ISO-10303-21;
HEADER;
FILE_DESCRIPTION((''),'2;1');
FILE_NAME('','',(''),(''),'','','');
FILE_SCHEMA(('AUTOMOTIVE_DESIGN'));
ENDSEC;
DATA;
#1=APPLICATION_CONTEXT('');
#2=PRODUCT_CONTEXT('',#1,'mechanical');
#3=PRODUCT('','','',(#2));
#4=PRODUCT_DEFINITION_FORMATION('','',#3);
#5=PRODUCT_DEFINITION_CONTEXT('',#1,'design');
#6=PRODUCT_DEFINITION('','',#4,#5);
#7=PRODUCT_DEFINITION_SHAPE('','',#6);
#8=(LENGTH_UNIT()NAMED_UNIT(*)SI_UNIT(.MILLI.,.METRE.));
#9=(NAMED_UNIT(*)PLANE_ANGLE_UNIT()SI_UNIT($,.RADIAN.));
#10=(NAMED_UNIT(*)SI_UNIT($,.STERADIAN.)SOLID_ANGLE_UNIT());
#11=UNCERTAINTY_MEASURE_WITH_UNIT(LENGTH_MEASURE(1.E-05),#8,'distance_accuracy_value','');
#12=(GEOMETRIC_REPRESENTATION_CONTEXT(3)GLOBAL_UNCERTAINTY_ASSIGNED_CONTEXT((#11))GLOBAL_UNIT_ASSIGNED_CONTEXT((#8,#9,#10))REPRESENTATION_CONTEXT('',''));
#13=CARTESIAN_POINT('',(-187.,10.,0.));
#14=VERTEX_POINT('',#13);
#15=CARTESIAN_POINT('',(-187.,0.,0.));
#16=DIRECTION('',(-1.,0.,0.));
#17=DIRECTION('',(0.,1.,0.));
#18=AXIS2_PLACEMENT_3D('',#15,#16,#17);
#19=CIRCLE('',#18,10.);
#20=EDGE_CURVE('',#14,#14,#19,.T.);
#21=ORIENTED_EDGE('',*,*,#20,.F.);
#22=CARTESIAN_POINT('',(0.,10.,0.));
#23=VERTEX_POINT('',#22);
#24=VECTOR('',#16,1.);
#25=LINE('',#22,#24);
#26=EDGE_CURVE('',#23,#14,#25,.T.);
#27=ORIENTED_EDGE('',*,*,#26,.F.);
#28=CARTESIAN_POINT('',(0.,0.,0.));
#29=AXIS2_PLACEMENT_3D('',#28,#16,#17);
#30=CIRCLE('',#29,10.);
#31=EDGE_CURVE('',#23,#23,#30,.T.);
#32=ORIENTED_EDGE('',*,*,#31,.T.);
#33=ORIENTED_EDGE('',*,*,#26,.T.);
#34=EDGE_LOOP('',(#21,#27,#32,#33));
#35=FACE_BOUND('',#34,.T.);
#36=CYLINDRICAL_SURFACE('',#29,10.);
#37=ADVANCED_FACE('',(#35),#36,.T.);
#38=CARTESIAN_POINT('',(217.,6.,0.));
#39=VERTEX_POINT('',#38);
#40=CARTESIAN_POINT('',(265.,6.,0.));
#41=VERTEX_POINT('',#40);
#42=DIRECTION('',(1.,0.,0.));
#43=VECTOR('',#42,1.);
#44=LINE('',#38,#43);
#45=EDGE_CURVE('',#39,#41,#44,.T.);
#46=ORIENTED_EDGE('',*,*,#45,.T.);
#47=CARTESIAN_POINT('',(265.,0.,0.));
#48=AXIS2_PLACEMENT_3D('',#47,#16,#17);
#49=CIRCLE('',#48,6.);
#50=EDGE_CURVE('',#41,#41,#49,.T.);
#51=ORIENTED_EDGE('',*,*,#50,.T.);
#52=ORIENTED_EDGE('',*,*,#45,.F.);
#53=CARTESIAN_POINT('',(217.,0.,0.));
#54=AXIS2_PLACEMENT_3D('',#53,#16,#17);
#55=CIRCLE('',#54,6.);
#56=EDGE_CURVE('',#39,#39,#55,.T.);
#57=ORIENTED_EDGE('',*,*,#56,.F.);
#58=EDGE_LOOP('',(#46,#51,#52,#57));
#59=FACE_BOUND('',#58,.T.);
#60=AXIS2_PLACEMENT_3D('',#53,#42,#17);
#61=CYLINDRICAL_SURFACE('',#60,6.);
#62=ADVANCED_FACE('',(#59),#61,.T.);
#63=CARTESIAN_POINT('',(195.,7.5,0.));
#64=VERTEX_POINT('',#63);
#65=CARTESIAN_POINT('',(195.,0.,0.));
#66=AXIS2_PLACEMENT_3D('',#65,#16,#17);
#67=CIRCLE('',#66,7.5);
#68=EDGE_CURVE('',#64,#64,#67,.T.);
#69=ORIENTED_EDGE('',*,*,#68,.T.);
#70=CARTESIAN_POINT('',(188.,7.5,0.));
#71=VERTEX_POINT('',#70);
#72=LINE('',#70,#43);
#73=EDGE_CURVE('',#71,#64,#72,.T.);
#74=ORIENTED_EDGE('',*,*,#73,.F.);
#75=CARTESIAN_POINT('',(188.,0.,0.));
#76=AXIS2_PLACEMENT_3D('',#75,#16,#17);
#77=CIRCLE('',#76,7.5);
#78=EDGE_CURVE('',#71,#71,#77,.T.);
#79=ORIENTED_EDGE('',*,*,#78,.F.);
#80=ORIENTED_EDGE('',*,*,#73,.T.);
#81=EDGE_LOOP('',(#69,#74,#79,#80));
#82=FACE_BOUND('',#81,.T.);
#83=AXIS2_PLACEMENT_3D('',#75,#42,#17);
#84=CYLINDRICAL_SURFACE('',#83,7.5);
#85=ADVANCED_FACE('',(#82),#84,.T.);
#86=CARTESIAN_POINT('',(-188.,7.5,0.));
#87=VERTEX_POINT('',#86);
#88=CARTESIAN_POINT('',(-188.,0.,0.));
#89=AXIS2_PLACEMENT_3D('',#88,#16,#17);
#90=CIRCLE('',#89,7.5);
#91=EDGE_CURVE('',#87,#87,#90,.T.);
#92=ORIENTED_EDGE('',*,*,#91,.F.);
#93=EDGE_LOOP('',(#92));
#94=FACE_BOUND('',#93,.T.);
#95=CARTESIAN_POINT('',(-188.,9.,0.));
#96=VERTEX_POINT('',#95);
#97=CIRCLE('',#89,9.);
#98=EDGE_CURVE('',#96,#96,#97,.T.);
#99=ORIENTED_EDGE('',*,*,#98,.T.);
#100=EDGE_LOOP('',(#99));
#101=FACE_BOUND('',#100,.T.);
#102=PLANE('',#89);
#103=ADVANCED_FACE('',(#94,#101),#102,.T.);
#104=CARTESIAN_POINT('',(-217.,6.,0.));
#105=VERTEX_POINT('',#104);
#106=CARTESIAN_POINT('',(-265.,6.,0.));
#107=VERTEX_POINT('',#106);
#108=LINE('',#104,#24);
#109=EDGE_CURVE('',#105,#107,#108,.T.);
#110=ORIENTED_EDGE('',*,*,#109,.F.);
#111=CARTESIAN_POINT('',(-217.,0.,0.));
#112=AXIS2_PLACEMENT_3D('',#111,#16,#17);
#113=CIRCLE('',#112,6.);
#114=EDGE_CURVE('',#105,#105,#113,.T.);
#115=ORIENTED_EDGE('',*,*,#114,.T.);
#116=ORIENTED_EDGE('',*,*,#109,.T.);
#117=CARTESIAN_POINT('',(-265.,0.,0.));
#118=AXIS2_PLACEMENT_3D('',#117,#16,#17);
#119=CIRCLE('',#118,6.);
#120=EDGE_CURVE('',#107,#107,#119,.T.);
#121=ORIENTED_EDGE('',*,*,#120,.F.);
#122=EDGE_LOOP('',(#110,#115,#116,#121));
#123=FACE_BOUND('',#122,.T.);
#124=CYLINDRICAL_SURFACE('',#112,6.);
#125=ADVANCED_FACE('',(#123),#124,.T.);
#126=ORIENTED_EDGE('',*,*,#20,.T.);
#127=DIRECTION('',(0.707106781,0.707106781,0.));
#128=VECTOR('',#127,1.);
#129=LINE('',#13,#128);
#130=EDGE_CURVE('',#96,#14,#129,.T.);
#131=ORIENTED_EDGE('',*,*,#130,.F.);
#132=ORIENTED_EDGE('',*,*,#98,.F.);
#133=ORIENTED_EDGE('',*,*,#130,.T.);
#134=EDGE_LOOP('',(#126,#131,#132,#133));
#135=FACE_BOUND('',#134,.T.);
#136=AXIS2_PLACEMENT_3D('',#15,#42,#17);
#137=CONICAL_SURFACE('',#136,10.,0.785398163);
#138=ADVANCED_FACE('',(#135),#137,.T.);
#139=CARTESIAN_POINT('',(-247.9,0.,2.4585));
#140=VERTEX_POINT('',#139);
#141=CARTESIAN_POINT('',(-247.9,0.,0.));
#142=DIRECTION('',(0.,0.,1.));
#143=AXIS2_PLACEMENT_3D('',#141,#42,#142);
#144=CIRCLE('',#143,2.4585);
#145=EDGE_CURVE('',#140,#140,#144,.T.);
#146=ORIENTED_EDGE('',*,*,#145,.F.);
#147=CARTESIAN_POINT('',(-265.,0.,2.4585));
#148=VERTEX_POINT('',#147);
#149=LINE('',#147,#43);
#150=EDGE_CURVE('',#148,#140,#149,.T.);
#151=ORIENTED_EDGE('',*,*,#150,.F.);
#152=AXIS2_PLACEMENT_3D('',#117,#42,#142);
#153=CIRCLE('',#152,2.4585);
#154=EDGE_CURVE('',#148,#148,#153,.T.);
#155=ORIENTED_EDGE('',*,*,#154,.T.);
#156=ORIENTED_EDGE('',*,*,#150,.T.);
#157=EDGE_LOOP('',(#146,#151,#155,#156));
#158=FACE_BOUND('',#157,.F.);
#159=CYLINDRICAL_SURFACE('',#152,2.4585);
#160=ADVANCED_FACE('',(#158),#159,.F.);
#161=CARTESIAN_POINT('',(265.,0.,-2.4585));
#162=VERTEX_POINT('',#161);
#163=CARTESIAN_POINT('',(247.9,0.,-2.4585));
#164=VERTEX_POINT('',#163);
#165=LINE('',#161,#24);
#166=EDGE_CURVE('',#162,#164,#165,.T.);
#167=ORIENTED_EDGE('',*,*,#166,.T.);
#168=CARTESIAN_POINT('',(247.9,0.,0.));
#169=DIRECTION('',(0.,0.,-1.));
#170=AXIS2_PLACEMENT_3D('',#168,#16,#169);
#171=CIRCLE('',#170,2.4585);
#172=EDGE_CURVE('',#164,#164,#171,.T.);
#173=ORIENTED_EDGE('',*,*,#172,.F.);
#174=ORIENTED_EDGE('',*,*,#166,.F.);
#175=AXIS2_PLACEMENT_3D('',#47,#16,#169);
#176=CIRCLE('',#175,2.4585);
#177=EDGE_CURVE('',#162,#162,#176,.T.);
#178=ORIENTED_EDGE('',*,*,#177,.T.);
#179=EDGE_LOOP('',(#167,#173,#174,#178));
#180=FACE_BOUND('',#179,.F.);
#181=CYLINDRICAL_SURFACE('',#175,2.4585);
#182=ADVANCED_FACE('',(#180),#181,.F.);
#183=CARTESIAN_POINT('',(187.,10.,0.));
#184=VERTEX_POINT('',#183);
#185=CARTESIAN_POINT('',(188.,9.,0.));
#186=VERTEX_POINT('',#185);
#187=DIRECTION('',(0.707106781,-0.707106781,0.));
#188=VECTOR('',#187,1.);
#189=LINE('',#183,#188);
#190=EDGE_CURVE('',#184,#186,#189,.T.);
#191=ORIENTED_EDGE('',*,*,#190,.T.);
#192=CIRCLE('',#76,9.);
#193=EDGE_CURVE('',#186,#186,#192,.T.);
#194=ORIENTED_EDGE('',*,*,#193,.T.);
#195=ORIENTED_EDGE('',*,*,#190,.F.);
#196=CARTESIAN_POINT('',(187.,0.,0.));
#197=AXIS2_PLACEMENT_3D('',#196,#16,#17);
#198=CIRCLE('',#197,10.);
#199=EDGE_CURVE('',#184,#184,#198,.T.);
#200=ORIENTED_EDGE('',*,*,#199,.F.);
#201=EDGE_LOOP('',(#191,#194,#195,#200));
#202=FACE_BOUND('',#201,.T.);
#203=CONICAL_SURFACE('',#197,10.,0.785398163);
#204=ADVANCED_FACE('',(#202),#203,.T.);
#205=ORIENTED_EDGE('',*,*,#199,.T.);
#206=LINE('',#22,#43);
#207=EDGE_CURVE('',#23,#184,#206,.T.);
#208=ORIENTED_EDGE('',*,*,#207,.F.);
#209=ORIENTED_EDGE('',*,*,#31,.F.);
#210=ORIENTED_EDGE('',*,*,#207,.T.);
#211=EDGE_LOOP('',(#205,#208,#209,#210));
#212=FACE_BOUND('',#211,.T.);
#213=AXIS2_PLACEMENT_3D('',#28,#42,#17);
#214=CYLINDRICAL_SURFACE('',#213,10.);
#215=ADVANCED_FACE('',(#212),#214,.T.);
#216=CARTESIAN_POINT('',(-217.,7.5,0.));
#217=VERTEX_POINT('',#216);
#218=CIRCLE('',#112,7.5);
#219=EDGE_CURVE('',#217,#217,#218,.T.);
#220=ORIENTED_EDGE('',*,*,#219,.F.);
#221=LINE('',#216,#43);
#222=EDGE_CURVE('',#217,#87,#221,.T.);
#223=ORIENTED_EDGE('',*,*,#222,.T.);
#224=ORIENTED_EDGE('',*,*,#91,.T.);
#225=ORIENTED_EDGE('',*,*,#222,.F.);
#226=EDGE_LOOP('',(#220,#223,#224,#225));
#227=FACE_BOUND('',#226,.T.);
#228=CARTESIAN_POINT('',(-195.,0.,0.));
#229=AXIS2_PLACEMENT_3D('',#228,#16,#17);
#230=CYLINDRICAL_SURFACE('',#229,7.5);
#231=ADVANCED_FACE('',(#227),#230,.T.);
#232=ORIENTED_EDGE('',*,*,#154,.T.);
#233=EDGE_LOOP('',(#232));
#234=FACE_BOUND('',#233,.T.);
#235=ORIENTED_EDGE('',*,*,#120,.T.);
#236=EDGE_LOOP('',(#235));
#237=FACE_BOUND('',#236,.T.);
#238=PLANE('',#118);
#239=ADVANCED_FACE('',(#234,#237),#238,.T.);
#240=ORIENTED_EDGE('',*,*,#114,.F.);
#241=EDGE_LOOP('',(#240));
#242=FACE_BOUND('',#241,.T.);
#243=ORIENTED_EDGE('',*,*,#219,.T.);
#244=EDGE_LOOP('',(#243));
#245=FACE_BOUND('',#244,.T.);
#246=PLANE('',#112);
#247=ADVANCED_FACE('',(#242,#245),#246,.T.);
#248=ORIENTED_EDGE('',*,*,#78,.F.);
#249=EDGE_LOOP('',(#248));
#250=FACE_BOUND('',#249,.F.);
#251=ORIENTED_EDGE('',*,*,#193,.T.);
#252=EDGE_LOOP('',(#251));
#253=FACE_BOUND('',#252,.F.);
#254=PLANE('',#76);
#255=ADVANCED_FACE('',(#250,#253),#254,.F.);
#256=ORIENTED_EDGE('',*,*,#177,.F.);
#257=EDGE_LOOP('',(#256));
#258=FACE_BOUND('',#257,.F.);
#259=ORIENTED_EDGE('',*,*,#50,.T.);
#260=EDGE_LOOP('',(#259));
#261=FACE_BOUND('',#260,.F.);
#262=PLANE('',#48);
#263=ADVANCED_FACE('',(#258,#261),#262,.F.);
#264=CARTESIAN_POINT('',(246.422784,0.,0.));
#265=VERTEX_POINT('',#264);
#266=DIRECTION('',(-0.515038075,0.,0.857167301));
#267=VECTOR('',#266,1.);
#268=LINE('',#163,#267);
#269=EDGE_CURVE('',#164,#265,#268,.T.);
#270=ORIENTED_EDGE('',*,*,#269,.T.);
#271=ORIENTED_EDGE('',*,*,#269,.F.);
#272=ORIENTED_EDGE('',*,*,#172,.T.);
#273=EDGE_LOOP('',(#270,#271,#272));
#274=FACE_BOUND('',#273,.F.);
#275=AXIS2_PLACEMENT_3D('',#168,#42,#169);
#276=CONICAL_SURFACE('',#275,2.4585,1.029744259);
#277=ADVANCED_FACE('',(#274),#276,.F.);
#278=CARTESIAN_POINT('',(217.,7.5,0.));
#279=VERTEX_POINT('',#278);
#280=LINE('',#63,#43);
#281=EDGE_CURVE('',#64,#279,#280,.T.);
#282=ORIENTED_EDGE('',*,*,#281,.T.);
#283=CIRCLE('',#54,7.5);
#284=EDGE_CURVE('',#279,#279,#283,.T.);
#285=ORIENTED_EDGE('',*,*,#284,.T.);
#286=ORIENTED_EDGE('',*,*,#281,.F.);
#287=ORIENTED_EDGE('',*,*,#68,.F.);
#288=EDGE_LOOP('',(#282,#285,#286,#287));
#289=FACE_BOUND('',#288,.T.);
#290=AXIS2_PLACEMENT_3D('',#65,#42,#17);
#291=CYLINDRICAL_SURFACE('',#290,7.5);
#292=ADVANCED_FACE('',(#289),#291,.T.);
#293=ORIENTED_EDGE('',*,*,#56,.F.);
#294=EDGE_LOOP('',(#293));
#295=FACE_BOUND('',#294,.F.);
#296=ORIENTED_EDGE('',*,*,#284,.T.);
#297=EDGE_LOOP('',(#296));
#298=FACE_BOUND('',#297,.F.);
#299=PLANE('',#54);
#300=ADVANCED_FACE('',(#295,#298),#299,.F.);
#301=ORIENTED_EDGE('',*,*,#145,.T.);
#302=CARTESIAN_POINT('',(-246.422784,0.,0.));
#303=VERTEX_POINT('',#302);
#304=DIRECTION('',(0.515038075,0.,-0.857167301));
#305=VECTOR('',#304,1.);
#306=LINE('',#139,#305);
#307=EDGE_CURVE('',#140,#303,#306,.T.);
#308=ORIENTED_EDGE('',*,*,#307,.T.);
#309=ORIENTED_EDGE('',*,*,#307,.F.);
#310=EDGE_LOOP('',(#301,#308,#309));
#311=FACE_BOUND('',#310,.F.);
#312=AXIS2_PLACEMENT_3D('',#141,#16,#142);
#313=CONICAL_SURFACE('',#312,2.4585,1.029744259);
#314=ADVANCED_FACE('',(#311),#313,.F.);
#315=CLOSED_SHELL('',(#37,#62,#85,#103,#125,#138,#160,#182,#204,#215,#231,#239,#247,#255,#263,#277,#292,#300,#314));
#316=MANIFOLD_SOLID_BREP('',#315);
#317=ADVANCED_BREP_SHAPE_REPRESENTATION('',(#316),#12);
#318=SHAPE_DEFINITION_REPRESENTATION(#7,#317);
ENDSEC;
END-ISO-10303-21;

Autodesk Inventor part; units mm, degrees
ref_plane "YZ Plane" through (0, 0, 0) normal (1, 0, 0) x (0, 1, 0)
ref_plane "XZ Plane" through (0, 0, 0) normal (0, 1, 0) x (-1, 0, 0)
ref_plane "XY Plane" through (0, 0, 0) normal (0, 0, 1) x (1, 0, 0)
sketch "Sketch1" plane through (0, 0, 0) normal (0, 0, 1) x (1, 0, 0)
  line L0 (0, 0) -> (0, 10)
  line L1 (0, 10) -> (188, 10)
  line L2 (188, 10) -> (188, 7.5)
  line L3 (188, 7.5) -> (195, 7.5)
  line L4 (195, 7.5) -> (195, 7.5)
  line L5 (195, 7.5) -> (217, 7.5)
  line L6 (265, 0) -> (0, 0)
  line L7 (217, 7.5) -> (217, 6)
  line L8 (217, 6) -> (265, 6)
  line L9 (265, 6) -> (265, 0)
  line L10 (0, 10) -> (-188, 10)
  line L11 (-188, 10) -> (-188, 7.5)
  line L12 (-188, 7.5) -> (-195, 7.5)
  line L13 (-195, 7.5) -> (-195, 7.5)
  line L14 (-195, 7.5) -> (-217, 7.5)
  line L15 (-265, 0) -> (0, 0)
  line L16 (-217, 7.5) -> (-217, 6)
  line L17 (-217, 6) -> (-265, 6)
  line L18 (-265, 6) -> (-265, 0)
  point P0 (188, 8.75)
  point P1 (217, 6.75)
  point P2 (-188, 8.75)
  point P3 (-217, 6.75)
  dimension "d0" = 10
  dimension "d1" = 188
  dimension "d2" = 7
  dimension "d4" = 265
  dimension "d5" = 6
  dimension "d6" = 7.5
  dimension "d7" = 7.5
  dimension "d12" = 217
revolve "Revolution1" add sketch "Sketch1" angle 360 about axis through (265, 0, 0) along (-1, 0, 0)
chamfer "Chamfer1" distance 1 angle 45 2 edges at (188, -10, 0) (-188, -10, 0)
thread "Thread1" size "M15x1.5" class "6g" standard "ANSI Metric M Profile" length 8
thread "Thread2" size "M15x1.5" class "6g" standard "ANSI Metric M Profile" length 8
sketch "Sketch3" plane through (-265, 0, 0) normal (-1, 0, 0) x (0, 0, 1)
  point P0 (0, 0)
  point P1 (0, 0)
hole "Hole1" at (-265, 0, 0) direction (1, 0, 0) diameter 4.917 depth 17.1 tip angle 118 thread size "M6x1" class "6H" standard "ISO Metric profile"
sketch "Sketch4" plane through (265, 0, 0) normal (1, 0, 0) x (0, 0, -1)
  point P0 (0, 0)
  point P1 (0, 0)
hole "Hole2" at (265, 0, 0) direction (-1, 0, 0) diameter 4.917 depth 17.1 tip angle 118 thread size "M6x1" class "6H" standard "ISO Metric profile"
properties part number "P301" material "Steel, Mild"
